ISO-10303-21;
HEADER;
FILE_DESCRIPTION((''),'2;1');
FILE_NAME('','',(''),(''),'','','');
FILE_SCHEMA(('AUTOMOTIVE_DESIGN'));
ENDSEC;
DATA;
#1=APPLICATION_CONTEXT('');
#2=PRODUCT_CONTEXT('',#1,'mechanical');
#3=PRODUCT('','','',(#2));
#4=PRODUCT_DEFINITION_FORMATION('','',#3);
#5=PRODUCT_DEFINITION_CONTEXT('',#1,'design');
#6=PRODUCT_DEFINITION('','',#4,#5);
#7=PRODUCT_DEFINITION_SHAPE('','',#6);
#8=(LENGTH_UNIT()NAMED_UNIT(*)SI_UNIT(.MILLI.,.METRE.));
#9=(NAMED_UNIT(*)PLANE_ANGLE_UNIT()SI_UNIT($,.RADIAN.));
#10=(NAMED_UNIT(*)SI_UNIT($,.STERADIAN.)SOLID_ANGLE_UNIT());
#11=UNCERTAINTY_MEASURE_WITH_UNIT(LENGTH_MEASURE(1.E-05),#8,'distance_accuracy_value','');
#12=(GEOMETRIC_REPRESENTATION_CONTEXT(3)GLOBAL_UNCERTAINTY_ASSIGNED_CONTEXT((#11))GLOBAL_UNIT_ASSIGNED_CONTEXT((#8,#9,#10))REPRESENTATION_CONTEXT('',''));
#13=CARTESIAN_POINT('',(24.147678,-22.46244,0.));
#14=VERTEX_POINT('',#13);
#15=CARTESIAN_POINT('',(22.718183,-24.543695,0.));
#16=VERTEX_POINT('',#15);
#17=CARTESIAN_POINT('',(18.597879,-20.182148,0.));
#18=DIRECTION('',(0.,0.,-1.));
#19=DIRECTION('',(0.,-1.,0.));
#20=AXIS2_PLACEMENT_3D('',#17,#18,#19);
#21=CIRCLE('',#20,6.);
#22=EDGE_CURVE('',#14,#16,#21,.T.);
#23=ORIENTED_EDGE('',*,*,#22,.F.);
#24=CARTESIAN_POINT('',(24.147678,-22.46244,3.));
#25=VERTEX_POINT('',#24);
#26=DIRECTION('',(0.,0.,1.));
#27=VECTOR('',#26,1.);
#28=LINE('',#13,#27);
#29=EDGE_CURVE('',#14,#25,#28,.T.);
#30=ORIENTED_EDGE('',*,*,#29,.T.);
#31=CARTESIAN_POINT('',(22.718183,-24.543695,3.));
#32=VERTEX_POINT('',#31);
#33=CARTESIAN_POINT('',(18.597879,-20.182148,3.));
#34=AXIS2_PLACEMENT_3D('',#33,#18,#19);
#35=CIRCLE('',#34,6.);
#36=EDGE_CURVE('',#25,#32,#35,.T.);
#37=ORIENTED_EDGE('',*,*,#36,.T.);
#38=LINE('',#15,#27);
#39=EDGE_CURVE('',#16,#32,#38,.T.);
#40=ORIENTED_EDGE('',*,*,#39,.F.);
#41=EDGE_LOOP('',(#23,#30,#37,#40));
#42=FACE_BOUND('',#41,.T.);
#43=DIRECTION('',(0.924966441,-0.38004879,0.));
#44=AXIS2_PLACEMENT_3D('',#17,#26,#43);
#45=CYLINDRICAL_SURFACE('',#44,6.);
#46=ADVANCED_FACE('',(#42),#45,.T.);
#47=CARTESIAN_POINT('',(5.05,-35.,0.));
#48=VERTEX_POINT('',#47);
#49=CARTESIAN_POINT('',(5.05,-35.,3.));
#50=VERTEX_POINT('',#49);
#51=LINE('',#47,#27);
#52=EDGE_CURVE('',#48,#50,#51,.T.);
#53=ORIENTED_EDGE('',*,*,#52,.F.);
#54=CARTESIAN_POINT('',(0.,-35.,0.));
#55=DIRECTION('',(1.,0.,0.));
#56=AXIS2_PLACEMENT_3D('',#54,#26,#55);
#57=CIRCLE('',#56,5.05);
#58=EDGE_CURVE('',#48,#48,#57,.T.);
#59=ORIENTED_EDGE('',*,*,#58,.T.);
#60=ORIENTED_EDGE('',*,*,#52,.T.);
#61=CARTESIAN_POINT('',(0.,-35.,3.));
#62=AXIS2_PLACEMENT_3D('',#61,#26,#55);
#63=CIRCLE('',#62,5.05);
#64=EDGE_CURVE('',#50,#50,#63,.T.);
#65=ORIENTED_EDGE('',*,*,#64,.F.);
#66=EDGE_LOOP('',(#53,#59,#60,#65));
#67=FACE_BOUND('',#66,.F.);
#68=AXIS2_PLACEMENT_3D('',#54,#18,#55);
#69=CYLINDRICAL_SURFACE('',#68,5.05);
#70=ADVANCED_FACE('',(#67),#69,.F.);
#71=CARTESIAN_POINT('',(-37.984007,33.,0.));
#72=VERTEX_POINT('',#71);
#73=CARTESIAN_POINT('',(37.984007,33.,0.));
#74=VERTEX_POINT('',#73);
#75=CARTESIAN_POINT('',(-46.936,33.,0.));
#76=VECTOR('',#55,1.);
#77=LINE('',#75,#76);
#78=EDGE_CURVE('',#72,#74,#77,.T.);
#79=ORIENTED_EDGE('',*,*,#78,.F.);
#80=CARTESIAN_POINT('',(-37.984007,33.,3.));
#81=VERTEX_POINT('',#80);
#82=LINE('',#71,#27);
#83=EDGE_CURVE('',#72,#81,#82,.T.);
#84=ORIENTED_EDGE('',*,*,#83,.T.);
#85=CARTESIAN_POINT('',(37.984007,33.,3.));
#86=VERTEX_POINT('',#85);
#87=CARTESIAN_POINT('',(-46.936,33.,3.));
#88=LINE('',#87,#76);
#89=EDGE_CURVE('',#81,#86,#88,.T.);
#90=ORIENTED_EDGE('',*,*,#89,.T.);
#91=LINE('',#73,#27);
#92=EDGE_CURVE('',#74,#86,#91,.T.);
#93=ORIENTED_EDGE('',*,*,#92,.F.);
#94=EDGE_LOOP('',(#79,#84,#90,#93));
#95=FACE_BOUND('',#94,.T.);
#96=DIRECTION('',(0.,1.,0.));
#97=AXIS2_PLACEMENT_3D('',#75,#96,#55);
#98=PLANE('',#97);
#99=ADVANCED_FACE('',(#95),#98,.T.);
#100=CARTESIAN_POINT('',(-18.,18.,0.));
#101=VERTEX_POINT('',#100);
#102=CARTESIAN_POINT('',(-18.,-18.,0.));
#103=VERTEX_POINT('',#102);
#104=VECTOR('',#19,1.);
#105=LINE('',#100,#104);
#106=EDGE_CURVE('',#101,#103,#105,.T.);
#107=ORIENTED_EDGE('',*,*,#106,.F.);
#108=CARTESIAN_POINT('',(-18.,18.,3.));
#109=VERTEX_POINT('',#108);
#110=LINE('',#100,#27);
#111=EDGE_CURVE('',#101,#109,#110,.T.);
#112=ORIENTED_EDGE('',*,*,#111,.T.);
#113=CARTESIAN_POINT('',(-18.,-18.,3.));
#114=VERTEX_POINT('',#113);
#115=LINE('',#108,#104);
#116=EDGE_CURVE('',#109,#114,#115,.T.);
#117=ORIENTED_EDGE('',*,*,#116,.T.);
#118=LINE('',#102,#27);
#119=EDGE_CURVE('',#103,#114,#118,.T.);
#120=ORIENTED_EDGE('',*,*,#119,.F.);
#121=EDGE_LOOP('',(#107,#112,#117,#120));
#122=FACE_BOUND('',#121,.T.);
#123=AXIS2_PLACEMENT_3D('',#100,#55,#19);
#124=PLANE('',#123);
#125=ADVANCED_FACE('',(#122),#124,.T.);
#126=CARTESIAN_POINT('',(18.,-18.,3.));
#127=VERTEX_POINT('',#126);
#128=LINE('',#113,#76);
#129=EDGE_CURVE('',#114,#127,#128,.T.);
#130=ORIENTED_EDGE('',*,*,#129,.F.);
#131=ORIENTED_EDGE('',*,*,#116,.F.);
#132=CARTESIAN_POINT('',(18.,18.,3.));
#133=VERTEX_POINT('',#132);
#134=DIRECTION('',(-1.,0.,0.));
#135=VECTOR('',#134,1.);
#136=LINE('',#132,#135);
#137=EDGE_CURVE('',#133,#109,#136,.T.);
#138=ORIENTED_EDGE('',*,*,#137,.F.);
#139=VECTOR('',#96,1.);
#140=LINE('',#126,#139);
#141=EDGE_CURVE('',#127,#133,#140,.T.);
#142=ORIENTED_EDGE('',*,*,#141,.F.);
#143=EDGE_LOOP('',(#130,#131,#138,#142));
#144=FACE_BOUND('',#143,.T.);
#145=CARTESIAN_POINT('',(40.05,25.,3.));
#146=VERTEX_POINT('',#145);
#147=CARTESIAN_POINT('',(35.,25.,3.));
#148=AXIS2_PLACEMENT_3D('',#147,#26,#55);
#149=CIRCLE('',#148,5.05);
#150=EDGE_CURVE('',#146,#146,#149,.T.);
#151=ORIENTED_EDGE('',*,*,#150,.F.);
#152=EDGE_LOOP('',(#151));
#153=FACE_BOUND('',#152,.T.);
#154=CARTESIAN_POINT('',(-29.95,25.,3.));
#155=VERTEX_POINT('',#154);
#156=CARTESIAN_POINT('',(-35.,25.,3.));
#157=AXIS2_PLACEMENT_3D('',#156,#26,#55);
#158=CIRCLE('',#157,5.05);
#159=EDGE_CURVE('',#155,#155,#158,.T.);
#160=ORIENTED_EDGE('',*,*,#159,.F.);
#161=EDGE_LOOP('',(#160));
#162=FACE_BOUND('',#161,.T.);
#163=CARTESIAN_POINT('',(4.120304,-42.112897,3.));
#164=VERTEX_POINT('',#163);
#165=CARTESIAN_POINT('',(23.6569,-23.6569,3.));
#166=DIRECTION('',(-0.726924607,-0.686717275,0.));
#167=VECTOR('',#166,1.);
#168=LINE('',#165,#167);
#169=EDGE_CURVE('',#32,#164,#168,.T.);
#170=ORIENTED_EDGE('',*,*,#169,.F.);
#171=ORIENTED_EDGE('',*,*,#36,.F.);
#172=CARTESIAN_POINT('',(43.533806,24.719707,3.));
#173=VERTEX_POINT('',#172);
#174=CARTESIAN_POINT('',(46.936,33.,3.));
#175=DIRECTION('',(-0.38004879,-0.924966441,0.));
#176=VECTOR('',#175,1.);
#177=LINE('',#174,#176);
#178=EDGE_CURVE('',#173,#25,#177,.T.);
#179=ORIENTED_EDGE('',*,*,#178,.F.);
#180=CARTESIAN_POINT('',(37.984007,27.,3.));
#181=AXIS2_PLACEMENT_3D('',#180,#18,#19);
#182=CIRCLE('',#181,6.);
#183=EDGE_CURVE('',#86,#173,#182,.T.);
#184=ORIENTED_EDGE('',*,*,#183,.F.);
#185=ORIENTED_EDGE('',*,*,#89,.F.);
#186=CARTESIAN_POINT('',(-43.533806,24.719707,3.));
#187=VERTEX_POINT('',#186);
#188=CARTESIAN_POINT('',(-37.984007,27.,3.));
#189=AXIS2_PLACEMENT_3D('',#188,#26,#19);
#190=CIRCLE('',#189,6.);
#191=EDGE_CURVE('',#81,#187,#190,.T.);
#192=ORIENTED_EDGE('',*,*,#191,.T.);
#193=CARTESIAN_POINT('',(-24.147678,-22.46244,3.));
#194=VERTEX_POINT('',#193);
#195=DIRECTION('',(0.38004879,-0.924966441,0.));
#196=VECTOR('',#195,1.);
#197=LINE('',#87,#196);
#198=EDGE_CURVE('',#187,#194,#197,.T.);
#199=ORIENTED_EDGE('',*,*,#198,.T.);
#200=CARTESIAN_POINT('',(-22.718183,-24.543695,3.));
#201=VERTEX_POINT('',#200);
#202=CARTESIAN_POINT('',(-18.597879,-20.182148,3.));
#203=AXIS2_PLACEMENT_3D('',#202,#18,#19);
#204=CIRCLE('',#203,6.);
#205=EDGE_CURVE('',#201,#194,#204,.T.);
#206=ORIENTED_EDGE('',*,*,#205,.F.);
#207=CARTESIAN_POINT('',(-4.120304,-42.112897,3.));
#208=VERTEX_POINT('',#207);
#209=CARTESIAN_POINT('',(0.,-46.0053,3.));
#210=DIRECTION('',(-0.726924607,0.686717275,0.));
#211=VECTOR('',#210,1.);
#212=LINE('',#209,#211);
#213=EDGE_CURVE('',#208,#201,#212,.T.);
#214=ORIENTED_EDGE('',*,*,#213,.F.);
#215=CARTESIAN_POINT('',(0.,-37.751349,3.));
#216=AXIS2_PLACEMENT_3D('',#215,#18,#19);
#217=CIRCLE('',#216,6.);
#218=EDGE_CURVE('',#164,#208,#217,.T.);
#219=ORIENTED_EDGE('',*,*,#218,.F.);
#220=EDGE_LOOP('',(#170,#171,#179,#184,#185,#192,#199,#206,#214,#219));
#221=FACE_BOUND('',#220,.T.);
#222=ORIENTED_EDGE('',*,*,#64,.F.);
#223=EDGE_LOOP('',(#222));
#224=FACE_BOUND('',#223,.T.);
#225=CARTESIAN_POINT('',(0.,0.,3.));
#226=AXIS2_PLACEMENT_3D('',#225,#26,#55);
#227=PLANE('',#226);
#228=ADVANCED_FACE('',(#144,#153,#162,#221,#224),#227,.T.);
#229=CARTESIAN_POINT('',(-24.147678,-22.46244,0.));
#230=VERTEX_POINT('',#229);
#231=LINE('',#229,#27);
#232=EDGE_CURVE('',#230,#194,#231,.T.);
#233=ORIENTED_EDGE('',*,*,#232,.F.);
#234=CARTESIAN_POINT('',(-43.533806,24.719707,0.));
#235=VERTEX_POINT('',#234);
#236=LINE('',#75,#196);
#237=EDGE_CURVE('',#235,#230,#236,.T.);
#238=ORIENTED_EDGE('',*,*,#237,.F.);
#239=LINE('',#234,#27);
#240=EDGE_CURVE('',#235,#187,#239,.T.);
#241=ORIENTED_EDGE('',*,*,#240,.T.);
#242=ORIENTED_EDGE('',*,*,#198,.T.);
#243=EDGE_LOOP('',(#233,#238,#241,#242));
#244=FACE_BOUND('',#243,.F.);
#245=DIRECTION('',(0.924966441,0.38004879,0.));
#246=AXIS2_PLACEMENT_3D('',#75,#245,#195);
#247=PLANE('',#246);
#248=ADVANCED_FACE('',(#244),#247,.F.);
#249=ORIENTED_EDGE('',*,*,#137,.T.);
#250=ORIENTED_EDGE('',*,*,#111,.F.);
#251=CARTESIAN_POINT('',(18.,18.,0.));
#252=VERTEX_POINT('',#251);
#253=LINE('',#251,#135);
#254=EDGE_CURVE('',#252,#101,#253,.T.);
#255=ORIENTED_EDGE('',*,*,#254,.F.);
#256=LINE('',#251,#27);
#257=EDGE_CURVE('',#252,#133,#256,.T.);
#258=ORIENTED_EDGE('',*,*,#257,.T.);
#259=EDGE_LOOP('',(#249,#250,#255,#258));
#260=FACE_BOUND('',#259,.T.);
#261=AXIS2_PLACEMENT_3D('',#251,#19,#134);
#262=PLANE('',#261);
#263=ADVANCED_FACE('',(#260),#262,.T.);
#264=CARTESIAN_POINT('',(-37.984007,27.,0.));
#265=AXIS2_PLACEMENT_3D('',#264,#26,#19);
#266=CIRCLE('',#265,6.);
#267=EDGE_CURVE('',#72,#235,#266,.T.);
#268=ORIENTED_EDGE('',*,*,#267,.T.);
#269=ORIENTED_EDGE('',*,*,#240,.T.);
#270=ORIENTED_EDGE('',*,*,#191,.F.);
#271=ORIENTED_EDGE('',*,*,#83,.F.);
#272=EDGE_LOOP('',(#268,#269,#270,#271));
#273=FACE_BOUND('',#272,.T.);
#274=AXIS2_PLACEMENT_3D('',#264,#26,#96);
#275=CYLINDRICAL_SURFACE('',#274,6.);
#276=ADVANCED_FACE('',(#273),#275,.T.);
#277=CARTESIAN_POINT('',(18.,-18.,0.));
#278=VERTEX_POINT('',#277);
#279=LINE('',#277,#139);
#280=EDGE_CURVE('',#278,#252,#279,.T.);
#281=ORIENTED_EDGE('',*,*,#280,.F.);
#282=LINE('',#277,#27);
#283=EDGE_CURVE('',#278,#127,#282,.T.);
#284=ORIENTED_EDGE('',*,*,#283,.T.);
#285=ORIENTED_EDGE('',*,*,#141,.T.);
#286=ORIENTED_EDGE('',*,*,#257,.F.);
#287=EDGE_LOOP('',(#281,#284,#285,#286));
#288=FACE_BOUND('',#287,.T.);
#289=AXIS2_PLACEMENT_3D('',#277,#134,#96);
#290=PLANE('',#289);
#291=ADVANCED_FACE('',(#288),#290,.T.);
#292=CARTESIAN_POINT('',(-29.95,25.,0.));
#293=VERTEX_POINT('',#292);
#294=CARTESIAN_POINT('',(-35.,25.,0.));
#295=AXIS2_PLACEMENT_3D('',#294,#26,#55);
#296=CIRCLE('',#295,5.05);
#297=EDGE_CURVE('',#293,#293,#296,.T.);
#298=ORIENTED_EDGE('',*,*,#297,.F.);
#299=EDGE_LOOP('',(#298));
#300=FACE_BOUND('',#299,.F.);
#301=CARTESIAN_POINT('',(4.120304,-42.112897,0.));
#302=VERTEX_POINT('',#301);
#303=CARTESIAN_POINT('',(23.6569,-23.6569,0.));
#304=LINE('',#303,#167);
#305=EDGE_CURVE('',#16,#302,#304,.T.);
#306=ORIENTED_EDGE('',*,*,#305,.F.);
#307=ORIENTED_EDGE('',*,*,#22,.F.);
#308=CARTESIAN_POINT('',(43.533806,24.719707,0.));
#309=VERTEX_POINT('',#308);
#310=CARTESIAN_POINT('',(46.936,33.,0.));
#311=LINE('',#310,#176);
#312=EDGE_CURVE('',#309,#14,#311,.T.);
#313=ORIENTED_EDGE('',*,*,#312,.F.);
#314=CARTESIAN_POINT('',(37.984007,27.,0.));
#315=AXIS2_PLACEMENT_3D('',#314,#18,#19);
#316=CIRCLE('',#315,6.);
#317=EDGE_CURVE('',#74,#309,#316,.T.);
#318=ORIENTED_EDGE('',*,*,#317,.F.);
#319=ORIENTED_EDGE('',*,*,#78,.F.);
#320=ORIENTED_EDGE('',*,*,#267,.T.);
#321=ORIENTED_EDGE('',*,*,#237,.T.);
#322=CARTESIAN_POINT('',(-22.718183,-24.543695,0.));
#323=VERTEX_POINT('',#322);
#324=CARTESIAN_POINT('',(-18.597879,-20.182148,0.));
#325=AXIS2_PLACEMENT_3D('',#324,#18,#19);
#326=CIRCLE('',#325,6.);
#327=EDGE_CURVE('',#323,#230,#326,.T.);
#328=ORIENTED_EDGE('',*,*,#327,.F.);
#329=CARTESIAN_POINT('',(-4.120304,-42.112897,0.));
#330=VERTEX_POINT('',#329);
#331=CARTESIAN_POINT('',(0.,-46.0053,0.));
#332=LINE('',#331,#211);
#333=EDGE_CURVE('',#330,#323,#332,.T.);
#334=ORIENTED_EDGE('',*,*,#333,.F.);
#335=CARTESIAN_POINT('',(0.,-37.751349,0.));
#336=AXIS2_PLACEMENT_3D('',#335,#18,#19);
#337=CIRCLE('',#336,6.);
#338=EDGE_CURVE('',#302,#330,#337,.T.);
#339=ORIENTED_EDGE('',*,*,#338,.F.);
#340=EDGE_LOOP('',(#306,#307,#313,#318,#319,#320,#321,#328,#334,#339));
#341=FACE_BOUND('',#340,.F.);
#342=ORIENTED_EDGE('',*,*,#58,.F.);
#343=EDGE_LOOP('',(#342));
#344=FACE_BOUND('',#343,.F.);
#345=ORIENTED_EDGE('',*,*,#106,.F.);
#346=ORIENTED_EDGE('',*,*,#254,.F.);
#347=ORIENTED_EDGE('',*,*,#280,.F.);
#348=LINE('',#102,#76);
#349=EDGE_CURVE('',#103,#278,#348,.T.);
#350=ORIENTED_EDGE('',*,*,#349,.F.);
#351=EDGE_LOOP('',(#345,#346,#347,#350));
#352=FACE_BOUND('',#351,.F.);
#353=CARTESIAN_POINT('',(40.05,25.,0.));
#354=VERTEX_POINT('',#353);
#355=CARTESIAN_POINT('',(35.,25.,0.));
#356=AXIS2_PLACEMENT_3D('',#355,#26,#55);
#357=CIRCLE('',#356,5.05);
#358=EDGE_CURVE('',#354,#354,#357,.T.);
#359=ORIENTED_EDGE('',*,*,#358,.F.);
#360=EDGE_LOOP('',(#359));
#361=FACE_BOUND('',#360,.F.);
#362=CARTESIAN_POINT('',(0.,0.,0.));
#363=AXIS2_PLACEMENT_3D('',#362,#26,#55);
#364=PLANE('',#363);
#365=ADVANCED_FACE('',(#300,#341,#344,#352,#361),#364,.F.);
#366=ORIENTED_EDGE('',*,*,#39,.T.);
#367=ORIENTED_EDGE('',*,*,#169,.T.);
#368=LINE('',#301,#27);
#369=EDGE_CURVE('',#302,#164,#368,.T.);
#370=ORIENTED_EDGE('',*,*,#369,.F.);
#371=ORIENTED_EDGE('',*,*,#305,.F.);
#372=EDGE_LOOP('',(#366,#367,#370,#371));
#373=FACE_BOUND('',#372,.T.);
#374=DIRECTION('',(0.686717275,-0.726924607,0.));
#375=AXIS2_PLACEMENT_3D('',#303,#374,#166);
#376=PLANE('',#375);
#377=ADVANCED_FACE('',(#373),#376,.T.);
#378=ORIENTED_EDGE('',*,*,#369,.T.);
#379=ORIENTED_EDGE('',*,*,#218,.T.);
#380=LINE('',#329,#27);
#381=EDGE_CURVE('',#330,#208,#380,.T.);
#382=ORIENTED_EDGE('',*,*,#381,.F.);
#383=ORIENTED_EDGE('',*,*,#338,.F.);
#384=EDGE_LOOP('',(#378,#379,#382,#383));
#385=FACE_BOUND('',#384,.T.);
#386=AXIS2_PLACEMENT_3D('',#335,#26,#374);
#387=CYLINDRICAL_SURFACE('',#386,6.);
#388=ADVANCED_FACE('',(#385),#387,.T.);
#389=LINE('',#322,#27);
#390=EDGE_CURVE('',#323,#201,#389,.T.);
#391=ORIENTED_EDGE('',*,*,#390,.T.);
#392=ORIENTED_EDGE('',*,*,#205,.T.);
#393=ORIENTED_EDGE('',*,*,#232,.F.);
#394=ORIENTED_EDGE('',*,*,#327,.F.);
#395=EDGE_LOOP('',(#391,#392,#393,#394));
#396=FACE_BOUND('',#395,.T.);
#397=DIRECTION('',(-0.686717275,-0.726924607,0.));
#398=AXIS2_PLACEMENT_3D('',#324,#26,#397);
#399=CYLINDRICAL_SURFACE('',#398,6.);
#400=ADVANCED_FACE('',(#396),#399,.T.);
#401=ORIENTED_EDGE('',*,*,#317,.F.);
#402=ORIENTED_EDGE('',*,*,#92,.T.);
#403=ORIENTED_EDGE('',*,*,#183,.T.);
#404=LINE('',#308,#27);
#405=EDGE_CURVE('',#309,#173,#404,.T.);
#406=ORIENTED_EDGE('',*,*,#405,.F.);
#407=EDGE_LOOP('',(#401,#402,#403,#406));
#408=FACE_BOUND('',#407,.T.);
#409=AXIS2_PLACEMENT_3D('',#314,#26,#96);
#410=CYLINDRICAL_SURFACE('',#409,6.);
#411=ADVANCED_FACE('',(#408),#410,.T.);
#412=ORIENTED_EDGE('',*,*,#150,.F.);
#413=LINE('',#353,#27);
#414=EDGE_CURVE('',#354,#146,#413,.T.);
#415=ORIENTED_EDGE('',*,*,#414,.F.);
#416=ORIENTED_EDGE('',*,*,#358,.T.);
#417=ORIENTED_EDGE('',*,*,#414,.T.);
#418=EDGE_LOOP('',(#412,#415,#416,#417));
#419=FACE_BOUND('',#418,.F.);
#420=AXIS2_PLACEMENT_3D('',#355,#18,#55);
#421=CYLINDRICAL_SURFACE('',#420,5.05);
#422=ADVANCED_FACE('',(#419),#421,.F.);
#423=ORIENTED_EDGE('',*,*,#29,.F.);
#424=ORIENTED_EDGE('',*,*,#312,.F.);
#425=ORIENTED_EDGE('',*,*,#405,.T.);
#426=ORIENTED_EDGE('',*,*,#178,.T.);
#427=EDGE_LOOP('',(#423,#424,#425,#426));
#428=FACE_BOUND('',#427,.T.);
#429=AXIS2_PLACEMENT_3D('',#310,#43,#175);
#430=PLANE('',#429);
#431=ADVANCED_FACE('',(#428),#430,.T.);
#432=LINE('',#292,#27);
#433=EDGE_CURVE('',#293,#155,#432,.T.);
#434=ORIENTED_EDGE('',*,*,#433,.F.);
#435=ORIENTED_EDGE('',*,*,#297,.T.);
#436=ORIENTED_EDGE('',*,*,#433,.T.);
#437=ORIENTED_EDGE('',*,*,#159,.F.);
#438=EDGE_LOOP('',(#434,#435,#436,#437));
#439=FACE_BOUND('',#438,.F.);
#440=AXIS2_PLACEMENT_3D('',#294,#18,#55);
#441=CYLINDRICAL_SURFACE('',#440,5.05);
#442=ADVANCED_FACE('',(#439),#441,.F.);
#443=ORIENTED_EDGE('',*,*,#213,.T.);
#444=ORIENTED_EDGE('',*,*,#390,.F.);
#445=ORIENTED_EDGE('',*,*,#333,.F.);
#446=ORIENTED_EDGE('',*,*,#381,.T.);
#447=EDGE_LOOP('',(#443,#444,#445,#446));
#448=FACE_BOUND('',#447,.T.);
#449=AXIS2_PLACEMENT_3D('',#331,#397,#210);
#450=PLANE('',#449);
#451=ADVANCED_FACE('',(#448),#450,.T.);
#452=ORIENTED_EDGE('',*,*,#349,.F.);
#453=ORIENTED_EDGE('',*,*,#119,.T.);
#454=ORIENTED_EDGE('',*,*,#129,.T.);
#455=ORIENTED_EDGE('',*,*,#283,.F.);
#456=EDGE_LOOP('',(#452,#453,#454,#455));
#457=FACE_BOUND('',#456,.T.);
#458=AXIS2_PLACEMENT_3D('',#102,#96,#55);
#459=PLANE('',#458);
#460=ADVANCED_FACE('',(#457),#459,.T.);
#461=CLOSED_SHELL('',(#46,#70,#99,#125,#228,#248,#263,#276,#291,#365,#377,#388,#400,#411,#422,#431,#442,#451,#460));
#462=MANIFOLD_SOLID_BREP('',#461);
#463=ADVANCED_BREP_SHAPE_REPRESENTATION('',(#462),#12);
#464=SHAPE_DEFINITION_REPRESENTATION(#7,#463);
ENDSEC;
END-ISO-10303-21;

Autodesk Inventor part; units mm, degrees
ref_plane "YZ Plane" through (0, 0, 0) normal (1, 0, 0) x (0, 1, 0)
ref_plane "XZ Plane" through (0, 0, 0) normal (0, 1, 0) x (-1, 0, 0)
ref_plane "XY Plane" through (0, 0, 0) normal (0, 0, 1) x (1, 0, 0)
sketch "Sketch6" plane through (0, 0, 0) normal (0, 0, 1) x (1, 0, 0)
  line L0 (18, 18) -> (-18, 18)
  line L1 (-18, 18) -> (-18, -18)
  line L2 (-18, -18) -> (18, -18)
  line L3 (18, -18) -> (18, 18)
  line L4 (18, 18) -> (-18, -18) construction
  circle A0 centre (0, -35) radius 5.05
  circle A1 centre (35, 25) radius 5.05
  circle A2 centre (-35, 25) radius 5.05
  line L5 (35, 25) -> (-35, 25) construction
  line L6 (-35, 25) -> (0, -35) construction
  line L7 (0, -35) -> (35, 25) construction
  line L8 (0, 18) -> (0, -18) construction
  line L9 (-46.936, 33) -> (46.936, 33)
  line L10 (-18, 18) -> (23.6569, -23.6569) construction
  line L11 (18, 18) -> (-23.6569, -23.6569) construction
  line L12 (46.936, 33) -> (23.6569, -23.6569)
  line L13 (23.6569, -23.6569) -> (0, -46.0053)
  line L14 (0, -46.0053) -> (-23.6569, -23.6569)
  line L15 (-46.936, 33) -> (-23.6569, -23.6569)
  line L16 (-35, 25) -> (-42.3997, 21.9596) construction
  line L17 (0, -35) -> (-5.4937, -40.8154) construction
  point P0 (0, 0)
  point P1 (0, 0)
  point P2 (60, 0)
  point P3 (0, 33)
  point P4 (0, 0)
  dimension "d30" = 36
  dimension "d31" = 36
  dimension "d33" = 10.1
  dimension "d37" = 69.4622
  dimension "d52" = 70
  dimension "d53" = 8
  dimension "d54" = 25
  dimension "d57" = 8
  dimension "d59" = 8
  dimension "d60" = 93.872
  dimension "d61" = 60
  dimension "d62" = 8
  dimension "d63" = 8
extrude "Plate3" add sketch "Sketch6" along normal blind 3
fillet "Corner Round2" radius 6 5 edges at (-46.936, 33, 1.5) (46.936, 33, 1.5) (0, -46.0053, 1.5) (-23.6569, -23.6569, 1.5) (23.6569, -23.6569, 1.5)
equation "\"d41\" = Thickness"
equation "\"BendReliefWidth\" = Thickness"
equation "\"BendReliefDepth\" = 0.5 * Thickness"
equation "\"CornerReliefSize\" = 4 * Thickness"
equation "\"MinimumRemnant\" = 2 * Thickness"
equation "\"TransitionRadius\" = BendRadius"
equation "\"JacobiRadiusSize\" = BendRadius"
equation "\"GapSize\" = Thickness"
equation "\"Thickness\" = 3"
equation "\"BendRadius\" = 5"
properties part number "DS-B-501 beam flange" material "Stainless Steel"
